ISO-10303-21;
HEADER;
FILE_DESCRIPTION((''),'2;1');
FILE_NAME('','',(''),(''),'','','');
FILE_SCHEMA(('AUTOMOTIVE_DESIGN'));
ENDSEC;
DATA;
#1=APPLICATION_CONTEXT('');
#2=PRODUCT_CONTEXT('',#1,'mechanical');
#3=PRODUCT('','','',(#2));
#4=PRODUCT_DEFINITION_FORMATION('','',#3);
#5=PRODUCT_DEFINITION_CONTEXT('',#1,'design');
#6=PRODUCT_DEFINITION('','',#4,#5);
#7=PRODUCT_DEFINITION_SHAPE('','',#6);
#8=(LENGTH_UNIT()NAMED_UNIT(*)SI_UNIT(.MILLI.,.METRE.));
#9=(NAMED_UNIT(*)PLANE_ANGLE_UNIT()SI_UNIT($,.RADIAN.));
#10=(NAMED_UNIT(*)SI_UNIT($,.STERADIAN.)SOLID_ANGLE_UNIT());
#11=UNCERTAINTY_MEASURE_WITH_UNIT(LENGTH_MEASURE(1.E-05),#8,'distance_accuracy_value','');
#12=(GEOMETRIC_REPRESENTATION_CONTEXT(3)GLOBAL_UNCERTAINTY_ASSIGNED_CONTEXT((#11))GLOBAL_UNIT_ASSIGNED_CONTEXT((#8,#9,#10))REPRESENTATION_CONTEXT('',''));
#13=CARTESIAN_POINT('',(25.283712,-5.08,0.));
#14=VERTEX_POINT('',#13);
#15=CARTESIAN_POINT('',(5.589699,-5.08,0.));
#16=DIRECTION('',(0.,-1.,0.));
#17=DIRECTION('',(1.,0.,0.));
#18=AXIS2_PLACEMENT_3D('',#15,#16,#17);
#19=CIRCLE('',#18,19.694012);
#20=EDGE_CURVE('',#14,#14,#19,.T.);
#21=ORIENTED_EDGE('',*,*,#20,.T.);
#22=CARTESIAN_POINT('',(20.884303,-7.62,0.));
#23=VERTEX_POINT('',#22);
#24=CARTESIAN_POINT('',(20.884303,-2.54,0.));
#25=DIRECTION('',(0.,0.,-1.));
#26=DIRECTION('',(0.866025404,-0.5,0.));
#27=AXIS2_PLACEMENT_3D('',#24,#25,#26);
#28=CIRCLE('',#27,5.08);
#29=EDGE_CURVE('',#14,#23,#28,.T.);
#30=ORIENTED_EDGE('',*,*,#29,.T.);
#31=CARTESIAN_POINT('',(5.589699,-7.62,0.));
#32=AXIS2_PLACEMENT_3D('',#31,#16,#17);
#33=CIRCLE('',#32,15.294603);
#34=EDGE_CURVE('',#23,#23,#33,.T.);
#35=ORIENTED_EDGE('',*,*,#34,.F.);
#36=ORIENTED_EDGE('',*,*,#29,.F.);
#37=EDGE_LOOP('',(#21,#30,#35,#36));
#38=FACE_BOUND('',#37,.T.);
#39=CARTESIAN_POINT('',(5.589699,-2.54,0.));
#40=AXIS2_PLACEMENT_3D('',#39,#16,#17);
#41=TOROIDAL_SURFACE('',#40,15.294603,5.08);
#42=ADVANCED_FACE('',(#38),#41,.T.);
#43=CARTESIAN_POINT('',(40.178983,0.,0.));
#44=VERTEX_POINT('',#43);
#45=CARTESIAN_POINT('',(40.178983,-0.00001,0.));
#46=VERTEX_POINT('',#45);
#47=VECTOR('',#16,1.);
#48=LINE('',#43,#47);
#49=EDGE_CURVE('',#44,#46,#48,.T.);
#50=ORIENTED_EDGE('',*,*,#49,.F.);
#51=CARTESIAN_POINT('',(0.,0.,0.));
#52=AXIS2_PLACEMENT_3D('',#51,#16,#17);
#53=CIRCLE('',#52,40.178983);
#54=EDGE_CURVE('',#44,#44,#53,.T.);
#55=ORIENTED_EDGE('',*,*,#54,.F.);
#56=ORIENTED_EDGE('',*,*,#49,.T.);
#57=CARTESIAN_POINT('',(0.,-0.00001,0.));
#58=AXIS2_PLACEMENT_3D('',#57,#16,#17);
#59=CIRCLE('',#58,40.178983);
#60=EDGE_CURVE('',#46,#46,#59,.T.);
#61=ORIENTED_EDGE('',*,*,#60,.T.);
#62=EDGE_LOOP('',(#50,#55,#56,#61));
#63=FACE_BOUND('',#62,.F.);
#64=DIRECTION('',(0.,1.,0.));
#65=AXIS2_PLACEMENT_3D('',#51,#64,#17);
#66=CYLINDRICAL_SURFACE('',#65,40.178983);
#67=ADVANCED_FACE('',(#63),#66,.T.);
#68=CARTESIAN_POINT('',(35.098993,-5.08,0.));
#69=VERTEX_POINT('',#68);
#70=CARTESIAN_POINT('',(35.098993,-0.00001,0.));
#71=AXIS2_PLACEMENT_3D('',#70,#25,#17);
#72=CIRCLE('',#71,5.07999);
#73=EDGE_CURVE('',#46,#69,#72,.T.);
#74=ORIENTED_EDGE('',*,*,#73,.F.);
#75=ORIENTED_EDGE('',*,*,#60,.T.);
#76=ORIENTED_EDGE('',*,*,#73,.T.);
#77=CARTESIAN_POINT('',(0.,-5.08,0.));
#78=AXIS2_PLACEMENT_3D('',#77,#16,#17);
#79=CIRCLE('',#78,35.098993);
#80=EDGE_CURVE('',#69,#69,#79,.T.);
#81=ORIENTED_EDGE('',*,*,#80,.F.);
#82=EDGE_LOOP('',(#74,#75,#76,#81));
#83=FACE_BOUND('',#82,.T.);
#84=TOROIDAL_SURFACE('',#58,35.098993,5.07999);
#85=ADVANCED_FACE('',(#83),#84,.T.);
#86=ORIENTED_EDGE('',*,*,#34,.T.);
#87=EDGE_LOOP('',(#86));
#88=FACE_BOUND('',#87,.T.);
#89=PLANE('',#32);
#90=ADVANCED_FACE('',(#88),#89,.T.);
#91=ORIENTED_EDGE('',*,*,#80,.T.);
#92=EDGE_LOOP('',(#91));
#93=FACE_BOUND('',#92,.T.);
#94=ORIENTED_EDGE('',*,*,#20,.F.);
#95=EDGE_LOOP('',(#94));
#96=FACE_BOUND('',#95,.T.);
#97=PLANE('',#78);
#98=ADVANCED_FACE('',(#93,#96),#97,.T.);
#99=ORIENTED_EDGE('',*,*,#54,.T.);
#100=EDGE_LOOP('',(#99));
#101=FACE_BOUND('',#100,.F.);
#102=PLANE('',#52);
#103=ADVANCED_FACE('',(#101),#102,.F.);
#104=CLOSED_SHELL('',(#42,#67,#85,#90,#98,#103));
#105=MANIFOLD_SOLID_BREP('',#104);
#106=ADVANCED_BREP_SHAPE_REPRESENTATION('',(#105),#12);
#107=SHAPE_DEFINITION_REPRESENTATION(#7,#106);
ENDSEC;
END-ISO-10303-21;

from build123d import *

# Parameters (mm, degrees)
F0_R     = 40.1789827743
F1_DEPTH = 5.08
F2_R     = 19.6940122024
F3_DEPTH = 2.54
F4_R     = 5.07999


# Not quite as in the source:
# - a fillet or chamfer that OpenCascade refuses, or shapes differently, is made with other operations: its cross-section is extruded or revolved along the edge and cut away or added
# - a fillet or chamfer is up to 0.001 mm smaller than in the source, because OpenCascade refuses the exact size


with BuildPart() as f1:
    # F0 (on Front) → F1 (new body)
    with BuildSketch(Plane.XZ):
        Circle(F0_R)
    extrude(amount=F1_DEPTH)

    # F2 (on face) → F3 (join)
    with BuildSketch(Plane.XZ.offset(5.08)):
        with Locations((5.5896993726, 0)):
            Circle(F2_R)
    extrude(amount=F3_DEPTH)

    # F4 (radius 5.08 in the source; OpenCascade refuses exactly that, so slightly less here)
    f4_edges = [f1.edges().sort_by_distance(p)[0] for p in [
        (-40.178983, -5.08, 0),
    ]]
    fillet(f4_edges, radius=F4_R)

    # F5: fillet of radius 5.08 on 1 edges, made by hand

    # F5_s1 → F5_t2 (revolve, cut)
    with BuildSketch(Plane.XY):
        with BuildLine():
            ThreePointArc((25.283711575, -5.08), (23.4243025238, -6.9394090512), (20.8843025238, -7.62))
            Line((20.8843025238, -7.62), (25.283711575, -7.62))
            Line((25.283711575, -7.62), (25.283711575, -5.08))
        make_face()
    revolve(axis=Axis((5.5896993726, -7.62, 0), (0, -1, 0)), mode=Mode.SUBTRACT)


solid = f1.part
